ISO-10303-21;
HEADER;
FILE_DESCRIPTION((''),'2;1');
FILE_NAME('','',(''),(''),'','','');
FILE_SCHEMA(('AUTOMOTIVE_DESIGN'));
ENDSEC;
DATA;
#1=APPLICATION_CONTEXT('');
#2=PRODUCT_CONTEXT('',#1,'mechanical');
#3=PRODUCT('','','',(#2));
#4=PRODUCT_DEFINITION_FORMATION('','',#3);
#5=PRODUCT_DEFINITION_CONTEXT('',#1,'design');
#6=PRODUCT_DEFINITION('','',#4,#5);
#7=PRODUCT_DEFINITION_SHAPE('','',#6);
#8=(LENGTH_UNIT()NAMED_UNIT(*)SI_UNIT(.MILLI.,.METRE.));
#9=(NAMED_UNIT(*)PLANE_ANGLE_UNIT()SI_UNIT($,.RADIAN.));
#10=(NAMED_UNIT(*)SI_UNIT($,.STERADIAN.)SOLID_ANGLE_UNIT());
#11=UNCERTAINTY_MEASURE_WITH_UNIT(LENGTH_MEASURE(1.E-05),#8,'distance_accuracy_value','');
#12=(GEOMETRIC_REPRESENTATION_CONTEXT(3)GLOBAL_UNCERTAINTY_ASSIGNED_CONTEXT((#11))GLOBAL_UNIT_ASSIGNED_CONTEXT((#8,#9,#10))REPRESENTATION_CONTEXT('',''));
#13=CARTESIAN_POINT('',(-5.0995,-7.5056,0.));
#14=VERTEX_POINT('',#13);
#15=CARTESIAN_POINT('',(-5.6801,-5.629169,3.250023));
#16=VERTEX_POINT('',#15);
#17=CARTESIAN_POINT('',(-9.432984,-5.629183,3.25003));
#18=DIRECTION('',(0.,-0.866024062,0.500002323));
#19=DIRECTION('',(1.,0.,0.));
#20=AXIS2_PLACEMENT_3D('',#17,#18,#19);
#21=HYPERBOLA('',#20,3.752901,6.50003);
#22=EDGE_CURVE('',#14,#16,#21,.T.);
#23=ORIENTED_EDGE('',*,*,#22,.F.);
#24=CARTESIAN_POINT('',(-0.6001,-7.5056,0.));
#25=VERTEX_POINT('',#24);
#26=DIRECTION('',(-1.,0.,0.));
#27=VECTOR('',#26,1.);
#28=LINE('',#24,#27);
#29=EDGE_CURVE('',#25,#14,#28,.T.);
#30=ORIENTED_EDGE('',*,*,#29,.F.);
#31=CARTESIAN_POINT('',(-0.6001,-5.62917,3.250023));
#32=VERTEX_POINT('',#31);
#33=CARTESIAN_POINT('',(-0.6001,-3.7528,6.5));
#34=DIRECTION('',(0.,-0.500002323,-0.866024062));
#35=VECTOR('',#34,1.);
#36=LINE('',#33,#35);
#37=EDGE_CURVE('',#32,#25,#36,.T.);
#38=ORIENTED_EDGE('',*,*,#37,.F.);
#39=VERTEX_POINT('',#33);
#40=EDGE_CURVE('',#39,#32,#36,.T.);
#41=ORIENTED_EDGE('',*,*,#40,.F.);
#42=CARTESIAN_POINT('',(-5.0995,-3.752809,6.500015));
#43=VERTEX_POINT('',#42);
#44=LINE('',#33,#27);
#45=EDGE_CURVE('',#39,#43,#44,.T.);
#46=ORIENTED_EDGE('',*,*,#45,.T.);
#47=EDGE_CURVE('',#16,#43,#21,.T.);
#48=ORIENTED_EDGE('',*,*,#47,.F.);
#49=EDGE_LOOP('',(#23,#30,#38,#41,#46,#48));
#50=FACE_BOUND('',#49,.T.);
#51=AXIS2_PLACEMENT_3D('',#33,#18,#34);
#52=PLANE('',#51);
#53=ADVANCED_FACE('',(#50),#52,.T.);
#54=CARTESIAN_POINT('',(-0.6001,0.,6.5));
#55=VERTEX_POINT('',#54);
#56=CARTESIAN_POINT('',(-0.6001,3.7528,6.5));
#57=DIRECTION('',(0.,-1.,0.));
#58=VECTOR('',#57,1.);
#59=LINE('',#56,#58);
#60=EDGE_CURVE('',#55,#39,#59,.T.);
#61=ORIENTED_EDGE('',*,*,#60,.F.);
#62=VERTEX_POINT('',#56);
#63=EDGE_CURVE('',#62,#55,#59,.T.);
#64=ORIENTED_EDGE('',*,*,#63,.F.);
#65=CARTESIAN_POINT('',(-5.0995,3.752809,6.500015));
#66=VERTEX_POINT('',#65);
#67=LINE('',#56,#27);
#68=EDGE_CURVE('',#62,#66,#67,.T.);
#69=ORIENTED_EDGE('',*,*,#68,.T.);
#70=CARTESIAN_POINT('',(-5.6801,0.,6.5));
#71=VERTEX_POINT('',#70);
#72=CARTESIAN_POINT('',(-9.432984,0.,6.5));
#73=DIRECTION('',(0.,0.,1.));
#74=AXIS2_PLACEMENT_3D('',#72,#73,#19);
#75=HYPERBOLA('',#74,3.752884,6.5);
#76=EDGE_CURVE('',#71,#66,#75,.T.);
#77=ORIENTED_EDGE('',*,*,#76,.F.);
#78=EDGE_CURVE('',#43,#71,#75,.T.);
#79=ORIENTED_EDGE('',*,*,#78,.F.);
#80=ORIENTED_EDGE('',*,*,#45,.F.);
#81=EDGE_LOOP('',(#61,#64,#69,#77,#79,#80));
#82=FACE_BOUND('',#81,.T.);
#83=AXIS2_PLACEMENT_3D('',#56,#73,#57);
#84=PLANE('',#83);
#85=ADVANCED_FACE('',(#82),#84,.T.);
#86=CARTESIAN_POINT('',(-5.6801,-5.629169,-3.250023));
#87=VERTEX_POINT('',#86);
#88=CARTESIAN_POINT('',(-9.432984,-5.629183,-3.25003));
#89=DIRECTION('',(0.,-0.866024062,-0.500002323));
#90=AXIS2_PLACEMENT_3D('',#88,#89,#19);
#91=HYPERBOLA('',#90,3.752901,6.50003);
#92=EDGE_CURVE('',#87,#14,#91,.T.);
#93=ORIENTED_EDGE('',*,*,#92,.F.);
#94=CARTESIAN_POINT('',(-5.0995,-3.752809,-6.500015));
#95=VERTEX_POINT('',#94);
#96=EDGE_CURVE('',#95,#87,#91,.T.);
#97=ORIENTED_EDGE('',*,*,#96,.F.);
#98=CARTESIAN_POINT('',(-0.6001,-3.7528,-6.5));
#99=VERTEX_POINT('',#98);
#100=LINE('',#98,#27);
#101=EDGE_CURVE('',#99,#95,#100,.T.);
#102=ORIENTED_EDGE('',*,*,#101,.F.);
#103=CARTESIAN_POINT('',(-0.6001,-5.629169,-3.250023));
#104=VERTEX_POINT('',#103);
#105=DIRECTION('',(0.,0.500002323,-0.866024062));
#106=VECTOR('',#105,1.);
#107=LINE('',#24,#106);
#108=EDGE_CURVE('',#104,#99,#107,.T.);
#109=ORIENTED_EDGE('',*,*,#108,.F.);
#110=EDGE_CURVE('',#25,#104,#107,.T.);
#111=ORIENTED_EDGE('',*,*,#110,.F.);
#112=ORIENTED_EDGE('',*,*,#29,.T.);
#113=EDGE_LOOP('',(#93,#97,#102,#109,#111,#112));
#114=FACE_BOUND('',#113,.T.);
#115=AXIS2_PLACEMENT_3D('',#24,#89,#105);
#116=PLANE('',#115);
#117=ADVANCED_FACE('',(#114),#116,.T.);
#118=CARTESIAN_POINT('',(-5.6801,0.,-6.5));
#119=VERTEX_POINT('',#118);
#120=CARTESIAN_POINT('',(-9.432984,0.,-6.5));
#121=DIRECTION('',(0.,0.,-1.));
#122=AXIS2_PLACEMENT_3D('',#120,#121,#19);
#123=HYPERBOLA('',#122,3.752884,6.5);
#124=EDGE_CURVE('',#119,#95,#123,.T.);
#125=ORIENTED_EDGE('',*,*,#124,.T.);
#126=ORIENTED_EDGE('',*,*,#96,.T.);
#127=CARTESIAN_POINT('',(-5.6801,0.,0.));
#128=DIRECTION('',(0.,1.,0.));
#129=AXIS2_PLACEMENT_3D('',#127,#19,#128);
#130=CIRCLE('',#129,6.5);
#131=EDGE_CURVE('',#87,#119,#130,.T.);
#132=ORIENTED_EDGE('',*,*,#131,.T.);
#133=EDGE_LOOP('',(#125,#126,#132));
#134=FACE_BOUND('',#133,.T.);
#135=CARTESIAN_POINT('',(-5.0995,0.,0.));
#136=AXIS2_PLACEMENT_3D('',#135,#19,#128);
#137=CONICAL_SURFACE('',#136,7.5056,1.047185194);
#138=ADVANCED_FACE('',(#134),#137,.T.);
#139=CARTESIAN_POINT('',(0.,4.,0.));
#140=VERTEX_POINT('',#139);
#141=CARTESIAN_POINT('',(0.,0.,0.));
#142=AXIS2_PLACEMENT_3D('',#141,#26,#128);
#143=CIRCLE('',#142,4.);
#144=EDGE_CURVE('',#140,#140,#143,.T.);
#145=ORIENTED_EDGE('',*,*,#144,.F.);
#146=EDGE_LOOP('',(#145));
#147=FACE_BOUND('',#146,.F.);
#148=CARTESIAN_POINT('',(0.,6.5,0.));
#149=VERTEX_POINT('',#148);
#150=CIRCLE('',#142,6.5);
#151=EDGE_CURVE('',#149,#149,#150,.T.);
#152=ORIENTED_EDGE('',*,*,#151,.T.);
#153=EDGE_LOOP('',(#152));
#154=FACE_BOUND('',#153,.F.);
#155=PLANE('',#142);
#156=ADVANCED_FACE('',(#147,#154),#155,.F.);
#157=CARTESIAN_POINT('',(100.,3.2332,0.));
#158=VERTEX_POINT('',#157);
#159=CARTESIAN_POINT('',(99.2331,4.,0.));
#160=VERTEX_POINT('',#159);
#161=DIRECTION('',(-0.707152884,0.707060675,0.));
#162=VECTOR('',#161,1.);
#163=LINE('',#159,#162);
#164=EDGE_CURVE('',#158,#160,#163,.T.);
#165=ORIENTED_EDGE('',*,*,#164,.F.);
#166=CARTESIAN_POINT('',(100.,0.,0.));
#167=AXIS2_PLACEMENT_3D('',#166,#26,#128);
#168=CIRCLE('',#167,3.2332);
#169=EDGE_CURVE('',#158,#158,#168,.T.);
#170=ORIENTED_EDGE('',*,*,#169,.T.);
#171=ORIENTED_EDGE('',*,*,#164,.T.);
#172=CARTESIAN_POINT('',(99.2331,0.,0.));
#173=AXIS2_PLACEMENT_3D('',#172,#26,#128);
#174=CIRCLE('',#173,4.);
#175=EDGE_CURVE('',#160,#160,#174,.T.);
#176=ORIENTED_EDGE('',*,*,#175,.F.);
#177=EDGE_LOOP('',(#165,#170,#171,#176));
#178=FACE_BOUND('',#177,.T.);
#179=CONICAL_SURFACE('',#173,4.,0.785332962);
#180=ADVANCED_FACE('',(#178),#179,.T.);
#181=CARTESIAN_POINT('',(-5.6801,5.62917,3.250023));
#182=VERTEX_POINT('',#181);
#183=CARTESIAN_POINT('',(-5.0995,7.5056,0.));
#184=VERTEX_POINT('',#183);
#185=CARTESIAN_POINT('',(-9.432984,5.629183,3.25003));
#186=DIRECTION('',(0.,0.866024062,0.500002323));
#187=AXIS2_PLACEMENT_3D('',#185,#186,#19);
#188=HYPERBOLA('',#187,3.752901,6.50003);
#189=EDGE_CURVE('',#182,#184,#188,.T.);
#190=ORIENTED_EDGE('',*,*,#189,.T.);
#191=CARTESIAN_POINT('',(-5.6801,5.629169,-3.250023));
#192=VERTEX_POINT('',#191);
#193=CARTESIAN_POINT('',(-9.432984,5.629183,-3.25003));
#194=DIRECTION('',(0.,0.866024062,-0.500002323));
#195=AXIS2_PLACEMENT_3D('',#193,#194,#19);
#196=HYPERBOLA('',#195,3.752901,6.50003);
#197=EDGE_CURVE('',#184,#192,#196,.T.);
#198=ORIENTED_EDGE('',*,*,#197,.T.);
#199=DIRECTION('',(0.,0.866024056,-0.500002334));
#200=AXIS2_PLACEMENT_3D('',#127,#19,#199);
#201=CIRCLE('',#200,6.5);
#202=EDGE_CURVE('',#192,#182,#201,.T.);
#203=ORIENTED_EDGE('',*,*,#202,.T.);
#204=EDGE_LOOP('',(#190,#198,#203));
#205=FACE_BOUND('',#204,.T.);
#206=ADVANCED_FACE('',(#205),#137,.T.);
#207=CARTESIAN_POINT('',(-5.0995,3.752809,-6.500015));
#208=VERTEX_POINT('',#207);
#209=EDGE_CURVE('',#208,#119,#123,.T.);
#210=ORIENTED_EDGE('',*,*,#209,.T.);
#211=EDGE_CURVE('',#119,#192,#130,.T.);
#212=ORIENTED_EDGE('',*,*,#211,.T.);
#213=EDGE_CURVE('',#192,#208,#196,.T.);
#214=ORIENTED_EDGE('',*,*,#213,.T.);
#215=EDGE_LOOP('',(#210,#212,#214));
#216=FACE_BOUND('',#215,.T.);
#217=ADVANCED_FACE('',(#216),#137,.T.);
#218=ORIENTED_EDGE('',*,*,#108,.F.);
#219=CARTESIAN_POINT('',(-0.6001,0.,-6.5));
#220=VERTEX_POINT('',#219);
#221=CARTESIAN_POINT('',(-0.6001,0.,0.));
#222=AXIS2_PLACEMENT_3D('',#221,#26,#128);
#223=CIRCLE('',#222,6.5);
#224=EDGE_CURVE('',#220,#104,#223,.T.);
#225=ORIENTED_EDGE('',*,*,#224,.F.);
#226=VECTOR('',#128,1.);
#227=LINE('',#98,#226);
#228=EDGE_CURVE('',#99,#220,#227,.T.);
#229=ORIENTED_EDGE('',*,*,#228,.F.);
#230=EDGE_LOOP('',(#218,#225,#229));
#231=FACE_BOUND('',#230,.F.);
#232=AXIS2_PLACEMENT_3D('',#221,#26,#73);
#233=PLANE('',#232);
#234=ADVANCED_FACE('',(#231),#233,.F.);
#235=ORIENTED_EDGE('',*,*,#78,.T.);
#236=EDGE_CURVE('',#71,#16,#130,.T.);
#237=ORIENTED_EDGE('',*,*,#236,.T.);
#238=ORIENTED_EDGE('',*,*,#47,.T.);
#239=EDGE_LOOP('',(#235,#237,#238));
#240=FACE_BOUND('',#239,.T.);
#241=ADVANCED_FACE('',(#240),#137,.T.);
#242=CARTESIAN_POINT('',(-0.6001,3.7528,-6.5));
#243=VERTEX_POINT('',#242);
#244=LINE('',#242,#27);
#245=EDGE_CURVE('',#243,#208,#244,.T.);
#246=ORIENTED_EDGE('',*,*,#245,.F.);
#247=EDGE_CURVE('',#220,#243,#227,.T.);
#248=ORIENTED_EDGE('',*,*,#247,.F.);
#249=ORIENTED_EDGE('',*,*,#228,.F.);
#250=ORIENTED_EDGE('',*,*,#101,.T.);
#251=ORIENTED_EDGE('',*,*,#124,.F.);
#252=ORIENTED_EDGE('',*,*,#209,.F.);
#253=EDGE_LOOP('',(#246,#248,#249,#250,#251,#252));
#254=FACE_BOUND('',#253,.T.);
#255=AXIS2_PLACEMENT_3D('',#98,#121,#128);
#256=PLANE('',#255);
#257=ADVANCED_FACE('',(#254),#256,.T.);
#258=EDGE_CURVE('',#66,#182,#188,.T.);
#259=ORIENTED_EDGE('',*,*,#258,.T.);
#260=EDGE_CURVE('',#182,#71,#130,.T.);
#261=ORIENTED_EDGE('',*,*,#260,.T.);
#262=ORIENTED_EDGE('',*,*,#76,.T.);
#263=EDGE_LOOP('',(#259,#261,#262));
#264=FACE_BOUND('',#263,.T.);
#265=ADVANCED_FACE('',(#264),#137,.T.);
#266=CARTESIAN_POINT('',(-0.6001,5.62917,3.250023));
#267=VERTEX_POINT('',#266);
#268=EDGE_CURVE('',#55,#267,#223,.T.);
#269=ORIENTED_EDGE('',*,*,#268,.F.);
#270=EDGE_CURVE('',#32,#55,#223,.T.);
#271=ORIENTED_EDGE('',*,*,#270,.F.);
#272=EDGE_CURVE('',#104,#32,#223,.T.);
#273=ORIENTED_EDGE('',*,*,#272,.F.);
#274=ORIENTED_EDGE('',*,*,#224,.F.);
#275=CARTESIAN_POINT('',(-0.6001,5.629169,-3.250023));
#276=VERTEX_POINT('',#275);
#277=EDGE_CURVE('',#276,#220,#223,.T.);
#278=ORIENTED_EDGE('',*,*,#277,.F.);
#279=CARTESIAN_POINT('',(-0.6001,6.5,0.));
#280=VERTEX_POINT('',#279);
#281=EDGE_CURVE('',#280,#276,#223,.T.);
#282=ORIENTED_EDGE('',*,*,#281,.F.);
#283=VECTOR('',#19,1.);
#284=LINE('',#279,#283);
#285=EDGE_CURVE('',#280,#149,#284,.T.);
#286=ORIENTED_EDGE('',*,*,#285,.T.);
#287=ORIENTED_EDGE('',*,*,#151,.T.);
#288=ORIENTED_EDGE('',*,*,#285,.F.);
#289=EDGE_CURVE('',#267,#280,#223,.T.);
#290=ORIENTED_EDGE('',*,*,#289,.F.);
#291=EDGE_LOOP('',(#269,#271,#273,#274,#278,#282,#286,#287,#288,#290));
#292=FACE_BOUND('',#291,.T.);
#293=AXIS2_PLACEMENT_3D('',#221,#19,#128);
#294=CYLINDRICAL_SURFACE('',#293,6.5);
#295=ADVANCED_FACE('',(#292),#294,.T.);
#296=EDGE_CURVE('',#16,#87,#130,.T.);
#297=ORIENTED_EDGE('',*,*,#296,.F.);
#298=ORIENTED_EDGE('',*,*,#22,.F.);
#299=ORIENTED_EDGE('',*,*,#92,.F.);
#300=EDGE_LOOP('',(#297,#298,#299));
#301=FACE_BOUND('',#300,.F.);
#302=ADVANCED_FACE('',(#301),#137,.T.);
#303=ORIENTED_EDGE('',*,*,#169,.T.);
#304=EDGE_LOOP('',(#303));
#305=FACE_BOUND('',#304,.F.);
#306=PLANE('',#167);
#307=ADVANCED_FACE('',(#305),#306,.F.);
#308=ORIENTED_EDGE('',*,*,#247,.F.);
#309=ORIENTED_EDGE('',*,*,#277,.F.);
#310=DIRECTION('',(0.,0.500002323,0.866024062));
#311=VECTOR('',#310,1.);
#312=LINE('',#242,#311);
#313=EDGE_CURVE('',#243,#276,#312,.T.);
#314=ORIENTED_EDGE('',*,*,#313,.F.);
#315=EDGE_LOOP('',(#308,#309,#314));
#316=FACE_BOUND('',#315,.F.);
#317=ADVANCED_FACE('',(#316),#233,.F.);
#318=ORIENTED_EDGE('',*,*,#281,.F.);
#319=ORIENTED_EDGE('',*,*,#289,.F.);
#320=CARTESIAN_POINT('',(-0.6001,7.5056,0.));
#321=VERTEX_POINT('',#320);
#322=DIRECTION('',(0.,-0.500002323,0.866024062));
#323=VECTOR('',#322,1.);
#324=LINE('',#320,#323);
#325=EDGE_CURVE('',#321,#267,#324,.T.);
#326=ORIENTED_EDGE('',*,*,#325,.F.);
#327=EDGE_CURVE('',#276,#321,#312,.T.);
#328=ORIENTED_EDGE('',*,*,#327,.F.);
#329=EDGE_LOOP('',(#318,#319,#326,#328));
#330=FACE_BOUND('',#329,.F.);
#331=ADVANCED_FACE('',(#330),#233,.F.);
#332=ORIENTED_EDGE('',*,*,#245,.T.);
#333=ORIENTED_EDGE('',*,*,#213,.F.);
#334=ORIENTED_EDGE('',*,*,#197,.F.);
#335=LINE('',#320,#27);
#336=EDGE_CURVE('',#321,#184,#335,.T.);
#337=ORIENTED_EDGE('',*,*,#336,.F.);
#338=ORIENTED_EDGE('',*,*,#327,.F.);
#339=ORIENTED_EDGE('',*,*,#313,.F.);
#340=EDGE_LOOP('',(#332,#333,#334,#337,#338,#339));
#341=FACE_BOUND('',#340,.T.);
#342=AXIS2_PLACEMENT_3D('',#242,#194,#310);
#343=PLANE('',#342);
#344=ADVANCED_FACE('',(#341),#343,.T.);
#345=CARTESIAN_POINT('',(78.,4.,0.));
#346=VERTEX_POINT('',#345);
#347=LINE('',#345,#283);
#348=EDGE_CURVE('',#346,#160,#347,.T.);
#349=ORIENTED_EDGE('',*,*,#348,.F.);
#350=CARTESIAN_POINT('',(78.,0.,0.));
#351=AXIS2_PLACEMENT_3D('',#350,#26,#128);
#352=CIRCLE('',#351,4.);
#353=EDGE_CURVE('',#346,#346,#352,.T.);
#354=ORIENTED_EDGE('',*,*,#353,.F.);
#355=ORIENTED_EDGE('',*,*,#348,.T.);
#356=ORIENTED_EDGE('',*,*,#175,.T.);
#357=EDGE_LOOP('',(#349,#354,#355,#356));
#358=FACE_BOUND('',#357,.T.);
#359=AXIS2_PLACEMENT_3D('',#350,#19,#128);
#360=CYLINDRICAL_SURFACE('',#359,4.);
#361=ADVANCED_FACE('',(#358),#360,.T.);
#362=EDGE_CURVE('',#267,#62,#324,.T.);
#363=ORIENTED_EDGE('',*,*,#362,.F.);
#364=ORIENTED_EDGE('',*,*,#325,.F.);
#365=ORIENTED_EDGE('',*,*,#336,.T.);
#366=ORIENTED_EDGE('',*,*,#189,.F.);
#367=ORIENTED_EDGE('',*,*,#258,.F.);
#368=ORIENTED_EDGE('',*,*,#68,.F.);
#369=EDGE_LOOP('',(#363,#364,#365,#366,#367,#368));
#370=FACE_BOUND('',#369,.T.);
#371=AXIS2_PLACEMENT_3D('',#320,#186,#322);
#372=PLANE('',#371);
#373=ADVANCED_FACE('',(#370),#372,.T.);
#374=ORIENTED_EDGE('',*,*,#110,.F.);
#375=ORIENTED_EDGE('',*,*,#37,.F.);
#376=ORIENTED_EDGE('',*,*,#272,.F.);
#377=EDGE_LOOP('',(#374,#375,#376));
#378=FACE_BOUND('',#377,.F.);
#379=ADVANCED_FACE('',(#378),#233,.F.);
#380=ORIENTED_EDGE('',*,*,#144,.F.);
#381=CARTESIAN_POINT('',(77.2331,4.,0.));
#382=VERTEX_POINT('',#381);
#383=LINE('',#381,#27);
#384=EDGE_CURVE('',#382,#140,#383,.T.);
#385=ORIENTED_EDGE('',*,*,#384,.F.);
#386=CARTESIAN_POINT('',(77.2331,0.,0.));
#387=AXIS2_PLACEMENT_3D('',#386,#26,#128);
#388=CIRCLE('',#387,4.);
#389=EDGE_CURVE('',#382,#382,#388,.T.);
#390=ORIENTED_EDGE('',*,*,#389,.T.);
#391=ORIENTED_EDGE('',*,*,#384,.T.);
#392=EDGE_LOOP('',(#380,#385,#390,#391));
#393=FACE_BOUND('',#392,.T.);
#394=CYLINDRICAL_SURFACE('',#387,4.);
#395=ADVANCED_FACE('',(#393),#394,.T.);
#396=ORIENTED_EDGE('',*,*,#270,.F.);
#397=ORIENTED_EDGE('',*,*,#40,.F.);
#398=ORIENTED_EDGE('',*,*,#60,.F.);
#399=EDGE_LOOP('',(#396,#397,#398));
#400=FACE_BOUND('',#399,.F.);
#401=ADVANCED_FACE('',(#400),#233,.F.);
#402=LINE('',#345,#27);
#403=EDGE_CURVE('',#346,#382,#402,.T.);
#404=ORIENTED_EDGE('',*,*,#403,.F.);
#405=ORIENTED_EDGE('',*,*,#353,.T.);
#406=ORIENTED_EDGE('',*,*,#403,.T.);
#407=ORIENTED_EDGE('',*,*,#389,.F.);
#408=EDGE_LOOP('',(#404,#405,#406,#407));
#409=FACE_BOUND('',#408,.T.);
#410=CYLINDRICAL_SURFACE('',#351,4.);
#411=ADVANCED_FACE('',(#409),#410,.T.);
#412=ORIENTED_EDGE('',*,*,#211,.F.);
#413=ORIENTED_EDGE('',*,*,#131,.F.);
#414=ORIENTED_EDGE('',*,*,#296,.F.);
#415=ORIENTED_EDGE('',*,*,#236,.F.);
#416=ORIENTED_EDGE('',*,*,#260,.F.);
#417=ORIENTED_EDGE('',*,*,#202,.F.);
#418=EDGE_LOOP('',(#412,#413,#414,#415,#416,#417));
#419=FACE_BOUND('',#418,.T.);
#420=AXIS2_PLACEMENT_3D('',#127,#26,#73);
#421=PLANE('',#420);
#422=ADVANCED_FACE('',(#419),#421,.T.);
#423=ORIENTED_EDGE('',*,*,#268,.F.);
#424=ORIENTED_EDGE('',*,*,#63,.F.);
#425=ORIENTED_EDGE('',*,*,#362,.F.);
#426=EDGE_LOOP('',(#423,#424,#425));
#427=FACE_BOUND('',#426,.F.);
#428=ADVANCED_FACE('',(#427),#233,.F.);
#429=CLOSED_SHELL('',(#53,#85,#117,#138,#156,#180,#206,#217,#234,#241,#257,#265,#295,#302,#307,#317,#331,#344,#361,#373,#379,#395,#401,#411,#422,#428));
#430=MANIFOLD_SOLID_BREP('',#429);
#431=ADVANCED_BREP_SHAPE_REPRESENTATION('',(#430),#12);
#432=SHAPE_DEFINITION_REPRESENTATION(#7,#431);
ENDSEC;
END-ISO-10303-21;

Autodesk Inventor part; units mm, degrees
ref_plane "YZ Plane" through (0, 0, 0) normal (1, 0, 0) x (0, 1, 0)
ref_plane "XZ Plane" through (0, 0, 0) normal (0, 1, 0) x (-1, 0, 0)
sketch "Sketch1" plane through (0, 0, 0) normal (0, 0, 1) x (1, 0, 0)
  line L0 (0, 6.5) -> (0, 4)
  line L1 (78, 4) -> (100, 4)
  line L2 (100, 4) -> (100, 0)
  line L3 (100, 0) -> (-0.6001, 0)
  line L4 (-20.7201, 0) -> (120.12, 0) projected
  line L5 (-0.6001, 0) -> (-0.6001, 6.5)
  line L6 (-0.6001, 6.5) -> (0, 6.5)
  line L7 (78, 4) -> (77.2331, 4)
  line L8 (77.2331, 4) -> (0, 4)
  line L9 (0, -1.3) -> (0, 7.8) projected
  dimension "d0" = 100
  dimension "d1" = 22
  dimension "d2" = 8
  dimension "d9" = 0.6001
  dimension "d10" = 13
  dimension "d13" = 0.7669
  dimension "d14" = 8
revolve "Body" add sketch "Sketch1" angle 360 about axis through (100, 0, 0) along (-1, 0, 0)
sketch "Sketch2" plane through (-0.6001, 0, 0) normal (-1, 0, 0) x (0, 0, 1)
  line L0 (0, 7.5056) -> (6.5, 3.7528)
  line L1 (6.5, 3.7528) -> (6.5, -3.7528)
  line L2 (6.5, -3.7528) -> (0, -7.5056)
  line L3 (0, -7.5056) -> (-6.5, -3.7528)
  line L4 (-6.5, -3.7528) -> (-6.5, 3.7528)
  line L5 (-6.5, 3.7528) -> (0, 7.5056)
  point P0 (0, 0)
  point P1 (0, 0)
  dimension "d11" = 13
extrude "Head" add sketch "Sketch2" along normal blind 5.08
sketch "Sketch4" plane through (0, 0, 0) normal (0, 0, 1) x (1, 0, 0)
  line L0 (-5.6801, 6.5) -> (-5.6801, 7.5056)
  line L1 (-5.6801, 7.5056) -> (-5.0995, 7.5056)
  line L2 (-5.0995, 7.5056) -> (-5.6801, 6.5)
  line L3 (-6.6961, 0) -> (0.4159, 0) projected
  line L4 (-0.6001, 7.5056) -> (-5.6801, 7.5056) projected
  line L5 (-5.6801, 3.7528) -> (-5.6801, 7.5056) projected
  dimension "d5" = 30
  dimension "d19" = 13
revolve "Chamfer1" cut sketch "Sketch4" angle 360 about axis through (-10, 0, 0) along (1, 0, 0)
thread "Thread" size "M8x1.25" class "6g" standard "ISO Metric profile" length 22
chamfer "Chamfer2" distance 0.7668 distance2 0.7669 1 edges at (100, -4, 0) measured on face at (100, -1.054, 1.6624)
ref_plane "Work Plane1" through (1.525, 0, 0) normal (0, 0, 1) x (1, 0, 0)
equation "\"d11\" = SW"
equation "\"d3\" = KOH - SD"
equation "\"d15\" = GEL"
equation "\"d6\" = -0.5 * SPD + 0.5 * GD"
equation "\"d0\" = NLG"
equation "\"d1\" = GEL"
equation "\"d2\" = GD"
equation "\"d10\" = SD2"
equation "\"d14\" = BDM"
equation "\"d5\" = ANG1"
equation "\"d19\" = SW0"
equation "\"NLG\" = 100"
equation "\"GD\" = NND"
equation "\"BDM\" = NND"
equation "\"KOH\" = 5.68"
equation "\"GEL\" = 22"
equation "\"SW\" = 13"
equation "\"SW0\" = SW"
equation "\"SPD\" = NND - 1.2269 * PTC"
equation "\"SD2\" = SW"
equation "\"SD\" = 0.6"
equation "\"ANG1\" = 30deg"
equation "\"GAL\" = 0.61345 * PTC"
equation "\"GUL\" = 0.61345 * PTC"
equation "\"RR\" = 0.4"
equation "\"WFT\" = SD"
equation "\"GD1\" = THREADDIA - 1.2269 * PTC"
equation "\"THREADDIA\" = 8"
equation "\"SDH\" = SW"
equation "\"TOA\" = 30deg"
equation "\"FAWI\" = 45deg"
equation "\"PTC\" = 1.25"
equation "\"NND\" = 8"
equation "\"E0\" = 1.155 * SW"
properties part number "AS 1111 - M8 x 100" material "Steel, Mild"
